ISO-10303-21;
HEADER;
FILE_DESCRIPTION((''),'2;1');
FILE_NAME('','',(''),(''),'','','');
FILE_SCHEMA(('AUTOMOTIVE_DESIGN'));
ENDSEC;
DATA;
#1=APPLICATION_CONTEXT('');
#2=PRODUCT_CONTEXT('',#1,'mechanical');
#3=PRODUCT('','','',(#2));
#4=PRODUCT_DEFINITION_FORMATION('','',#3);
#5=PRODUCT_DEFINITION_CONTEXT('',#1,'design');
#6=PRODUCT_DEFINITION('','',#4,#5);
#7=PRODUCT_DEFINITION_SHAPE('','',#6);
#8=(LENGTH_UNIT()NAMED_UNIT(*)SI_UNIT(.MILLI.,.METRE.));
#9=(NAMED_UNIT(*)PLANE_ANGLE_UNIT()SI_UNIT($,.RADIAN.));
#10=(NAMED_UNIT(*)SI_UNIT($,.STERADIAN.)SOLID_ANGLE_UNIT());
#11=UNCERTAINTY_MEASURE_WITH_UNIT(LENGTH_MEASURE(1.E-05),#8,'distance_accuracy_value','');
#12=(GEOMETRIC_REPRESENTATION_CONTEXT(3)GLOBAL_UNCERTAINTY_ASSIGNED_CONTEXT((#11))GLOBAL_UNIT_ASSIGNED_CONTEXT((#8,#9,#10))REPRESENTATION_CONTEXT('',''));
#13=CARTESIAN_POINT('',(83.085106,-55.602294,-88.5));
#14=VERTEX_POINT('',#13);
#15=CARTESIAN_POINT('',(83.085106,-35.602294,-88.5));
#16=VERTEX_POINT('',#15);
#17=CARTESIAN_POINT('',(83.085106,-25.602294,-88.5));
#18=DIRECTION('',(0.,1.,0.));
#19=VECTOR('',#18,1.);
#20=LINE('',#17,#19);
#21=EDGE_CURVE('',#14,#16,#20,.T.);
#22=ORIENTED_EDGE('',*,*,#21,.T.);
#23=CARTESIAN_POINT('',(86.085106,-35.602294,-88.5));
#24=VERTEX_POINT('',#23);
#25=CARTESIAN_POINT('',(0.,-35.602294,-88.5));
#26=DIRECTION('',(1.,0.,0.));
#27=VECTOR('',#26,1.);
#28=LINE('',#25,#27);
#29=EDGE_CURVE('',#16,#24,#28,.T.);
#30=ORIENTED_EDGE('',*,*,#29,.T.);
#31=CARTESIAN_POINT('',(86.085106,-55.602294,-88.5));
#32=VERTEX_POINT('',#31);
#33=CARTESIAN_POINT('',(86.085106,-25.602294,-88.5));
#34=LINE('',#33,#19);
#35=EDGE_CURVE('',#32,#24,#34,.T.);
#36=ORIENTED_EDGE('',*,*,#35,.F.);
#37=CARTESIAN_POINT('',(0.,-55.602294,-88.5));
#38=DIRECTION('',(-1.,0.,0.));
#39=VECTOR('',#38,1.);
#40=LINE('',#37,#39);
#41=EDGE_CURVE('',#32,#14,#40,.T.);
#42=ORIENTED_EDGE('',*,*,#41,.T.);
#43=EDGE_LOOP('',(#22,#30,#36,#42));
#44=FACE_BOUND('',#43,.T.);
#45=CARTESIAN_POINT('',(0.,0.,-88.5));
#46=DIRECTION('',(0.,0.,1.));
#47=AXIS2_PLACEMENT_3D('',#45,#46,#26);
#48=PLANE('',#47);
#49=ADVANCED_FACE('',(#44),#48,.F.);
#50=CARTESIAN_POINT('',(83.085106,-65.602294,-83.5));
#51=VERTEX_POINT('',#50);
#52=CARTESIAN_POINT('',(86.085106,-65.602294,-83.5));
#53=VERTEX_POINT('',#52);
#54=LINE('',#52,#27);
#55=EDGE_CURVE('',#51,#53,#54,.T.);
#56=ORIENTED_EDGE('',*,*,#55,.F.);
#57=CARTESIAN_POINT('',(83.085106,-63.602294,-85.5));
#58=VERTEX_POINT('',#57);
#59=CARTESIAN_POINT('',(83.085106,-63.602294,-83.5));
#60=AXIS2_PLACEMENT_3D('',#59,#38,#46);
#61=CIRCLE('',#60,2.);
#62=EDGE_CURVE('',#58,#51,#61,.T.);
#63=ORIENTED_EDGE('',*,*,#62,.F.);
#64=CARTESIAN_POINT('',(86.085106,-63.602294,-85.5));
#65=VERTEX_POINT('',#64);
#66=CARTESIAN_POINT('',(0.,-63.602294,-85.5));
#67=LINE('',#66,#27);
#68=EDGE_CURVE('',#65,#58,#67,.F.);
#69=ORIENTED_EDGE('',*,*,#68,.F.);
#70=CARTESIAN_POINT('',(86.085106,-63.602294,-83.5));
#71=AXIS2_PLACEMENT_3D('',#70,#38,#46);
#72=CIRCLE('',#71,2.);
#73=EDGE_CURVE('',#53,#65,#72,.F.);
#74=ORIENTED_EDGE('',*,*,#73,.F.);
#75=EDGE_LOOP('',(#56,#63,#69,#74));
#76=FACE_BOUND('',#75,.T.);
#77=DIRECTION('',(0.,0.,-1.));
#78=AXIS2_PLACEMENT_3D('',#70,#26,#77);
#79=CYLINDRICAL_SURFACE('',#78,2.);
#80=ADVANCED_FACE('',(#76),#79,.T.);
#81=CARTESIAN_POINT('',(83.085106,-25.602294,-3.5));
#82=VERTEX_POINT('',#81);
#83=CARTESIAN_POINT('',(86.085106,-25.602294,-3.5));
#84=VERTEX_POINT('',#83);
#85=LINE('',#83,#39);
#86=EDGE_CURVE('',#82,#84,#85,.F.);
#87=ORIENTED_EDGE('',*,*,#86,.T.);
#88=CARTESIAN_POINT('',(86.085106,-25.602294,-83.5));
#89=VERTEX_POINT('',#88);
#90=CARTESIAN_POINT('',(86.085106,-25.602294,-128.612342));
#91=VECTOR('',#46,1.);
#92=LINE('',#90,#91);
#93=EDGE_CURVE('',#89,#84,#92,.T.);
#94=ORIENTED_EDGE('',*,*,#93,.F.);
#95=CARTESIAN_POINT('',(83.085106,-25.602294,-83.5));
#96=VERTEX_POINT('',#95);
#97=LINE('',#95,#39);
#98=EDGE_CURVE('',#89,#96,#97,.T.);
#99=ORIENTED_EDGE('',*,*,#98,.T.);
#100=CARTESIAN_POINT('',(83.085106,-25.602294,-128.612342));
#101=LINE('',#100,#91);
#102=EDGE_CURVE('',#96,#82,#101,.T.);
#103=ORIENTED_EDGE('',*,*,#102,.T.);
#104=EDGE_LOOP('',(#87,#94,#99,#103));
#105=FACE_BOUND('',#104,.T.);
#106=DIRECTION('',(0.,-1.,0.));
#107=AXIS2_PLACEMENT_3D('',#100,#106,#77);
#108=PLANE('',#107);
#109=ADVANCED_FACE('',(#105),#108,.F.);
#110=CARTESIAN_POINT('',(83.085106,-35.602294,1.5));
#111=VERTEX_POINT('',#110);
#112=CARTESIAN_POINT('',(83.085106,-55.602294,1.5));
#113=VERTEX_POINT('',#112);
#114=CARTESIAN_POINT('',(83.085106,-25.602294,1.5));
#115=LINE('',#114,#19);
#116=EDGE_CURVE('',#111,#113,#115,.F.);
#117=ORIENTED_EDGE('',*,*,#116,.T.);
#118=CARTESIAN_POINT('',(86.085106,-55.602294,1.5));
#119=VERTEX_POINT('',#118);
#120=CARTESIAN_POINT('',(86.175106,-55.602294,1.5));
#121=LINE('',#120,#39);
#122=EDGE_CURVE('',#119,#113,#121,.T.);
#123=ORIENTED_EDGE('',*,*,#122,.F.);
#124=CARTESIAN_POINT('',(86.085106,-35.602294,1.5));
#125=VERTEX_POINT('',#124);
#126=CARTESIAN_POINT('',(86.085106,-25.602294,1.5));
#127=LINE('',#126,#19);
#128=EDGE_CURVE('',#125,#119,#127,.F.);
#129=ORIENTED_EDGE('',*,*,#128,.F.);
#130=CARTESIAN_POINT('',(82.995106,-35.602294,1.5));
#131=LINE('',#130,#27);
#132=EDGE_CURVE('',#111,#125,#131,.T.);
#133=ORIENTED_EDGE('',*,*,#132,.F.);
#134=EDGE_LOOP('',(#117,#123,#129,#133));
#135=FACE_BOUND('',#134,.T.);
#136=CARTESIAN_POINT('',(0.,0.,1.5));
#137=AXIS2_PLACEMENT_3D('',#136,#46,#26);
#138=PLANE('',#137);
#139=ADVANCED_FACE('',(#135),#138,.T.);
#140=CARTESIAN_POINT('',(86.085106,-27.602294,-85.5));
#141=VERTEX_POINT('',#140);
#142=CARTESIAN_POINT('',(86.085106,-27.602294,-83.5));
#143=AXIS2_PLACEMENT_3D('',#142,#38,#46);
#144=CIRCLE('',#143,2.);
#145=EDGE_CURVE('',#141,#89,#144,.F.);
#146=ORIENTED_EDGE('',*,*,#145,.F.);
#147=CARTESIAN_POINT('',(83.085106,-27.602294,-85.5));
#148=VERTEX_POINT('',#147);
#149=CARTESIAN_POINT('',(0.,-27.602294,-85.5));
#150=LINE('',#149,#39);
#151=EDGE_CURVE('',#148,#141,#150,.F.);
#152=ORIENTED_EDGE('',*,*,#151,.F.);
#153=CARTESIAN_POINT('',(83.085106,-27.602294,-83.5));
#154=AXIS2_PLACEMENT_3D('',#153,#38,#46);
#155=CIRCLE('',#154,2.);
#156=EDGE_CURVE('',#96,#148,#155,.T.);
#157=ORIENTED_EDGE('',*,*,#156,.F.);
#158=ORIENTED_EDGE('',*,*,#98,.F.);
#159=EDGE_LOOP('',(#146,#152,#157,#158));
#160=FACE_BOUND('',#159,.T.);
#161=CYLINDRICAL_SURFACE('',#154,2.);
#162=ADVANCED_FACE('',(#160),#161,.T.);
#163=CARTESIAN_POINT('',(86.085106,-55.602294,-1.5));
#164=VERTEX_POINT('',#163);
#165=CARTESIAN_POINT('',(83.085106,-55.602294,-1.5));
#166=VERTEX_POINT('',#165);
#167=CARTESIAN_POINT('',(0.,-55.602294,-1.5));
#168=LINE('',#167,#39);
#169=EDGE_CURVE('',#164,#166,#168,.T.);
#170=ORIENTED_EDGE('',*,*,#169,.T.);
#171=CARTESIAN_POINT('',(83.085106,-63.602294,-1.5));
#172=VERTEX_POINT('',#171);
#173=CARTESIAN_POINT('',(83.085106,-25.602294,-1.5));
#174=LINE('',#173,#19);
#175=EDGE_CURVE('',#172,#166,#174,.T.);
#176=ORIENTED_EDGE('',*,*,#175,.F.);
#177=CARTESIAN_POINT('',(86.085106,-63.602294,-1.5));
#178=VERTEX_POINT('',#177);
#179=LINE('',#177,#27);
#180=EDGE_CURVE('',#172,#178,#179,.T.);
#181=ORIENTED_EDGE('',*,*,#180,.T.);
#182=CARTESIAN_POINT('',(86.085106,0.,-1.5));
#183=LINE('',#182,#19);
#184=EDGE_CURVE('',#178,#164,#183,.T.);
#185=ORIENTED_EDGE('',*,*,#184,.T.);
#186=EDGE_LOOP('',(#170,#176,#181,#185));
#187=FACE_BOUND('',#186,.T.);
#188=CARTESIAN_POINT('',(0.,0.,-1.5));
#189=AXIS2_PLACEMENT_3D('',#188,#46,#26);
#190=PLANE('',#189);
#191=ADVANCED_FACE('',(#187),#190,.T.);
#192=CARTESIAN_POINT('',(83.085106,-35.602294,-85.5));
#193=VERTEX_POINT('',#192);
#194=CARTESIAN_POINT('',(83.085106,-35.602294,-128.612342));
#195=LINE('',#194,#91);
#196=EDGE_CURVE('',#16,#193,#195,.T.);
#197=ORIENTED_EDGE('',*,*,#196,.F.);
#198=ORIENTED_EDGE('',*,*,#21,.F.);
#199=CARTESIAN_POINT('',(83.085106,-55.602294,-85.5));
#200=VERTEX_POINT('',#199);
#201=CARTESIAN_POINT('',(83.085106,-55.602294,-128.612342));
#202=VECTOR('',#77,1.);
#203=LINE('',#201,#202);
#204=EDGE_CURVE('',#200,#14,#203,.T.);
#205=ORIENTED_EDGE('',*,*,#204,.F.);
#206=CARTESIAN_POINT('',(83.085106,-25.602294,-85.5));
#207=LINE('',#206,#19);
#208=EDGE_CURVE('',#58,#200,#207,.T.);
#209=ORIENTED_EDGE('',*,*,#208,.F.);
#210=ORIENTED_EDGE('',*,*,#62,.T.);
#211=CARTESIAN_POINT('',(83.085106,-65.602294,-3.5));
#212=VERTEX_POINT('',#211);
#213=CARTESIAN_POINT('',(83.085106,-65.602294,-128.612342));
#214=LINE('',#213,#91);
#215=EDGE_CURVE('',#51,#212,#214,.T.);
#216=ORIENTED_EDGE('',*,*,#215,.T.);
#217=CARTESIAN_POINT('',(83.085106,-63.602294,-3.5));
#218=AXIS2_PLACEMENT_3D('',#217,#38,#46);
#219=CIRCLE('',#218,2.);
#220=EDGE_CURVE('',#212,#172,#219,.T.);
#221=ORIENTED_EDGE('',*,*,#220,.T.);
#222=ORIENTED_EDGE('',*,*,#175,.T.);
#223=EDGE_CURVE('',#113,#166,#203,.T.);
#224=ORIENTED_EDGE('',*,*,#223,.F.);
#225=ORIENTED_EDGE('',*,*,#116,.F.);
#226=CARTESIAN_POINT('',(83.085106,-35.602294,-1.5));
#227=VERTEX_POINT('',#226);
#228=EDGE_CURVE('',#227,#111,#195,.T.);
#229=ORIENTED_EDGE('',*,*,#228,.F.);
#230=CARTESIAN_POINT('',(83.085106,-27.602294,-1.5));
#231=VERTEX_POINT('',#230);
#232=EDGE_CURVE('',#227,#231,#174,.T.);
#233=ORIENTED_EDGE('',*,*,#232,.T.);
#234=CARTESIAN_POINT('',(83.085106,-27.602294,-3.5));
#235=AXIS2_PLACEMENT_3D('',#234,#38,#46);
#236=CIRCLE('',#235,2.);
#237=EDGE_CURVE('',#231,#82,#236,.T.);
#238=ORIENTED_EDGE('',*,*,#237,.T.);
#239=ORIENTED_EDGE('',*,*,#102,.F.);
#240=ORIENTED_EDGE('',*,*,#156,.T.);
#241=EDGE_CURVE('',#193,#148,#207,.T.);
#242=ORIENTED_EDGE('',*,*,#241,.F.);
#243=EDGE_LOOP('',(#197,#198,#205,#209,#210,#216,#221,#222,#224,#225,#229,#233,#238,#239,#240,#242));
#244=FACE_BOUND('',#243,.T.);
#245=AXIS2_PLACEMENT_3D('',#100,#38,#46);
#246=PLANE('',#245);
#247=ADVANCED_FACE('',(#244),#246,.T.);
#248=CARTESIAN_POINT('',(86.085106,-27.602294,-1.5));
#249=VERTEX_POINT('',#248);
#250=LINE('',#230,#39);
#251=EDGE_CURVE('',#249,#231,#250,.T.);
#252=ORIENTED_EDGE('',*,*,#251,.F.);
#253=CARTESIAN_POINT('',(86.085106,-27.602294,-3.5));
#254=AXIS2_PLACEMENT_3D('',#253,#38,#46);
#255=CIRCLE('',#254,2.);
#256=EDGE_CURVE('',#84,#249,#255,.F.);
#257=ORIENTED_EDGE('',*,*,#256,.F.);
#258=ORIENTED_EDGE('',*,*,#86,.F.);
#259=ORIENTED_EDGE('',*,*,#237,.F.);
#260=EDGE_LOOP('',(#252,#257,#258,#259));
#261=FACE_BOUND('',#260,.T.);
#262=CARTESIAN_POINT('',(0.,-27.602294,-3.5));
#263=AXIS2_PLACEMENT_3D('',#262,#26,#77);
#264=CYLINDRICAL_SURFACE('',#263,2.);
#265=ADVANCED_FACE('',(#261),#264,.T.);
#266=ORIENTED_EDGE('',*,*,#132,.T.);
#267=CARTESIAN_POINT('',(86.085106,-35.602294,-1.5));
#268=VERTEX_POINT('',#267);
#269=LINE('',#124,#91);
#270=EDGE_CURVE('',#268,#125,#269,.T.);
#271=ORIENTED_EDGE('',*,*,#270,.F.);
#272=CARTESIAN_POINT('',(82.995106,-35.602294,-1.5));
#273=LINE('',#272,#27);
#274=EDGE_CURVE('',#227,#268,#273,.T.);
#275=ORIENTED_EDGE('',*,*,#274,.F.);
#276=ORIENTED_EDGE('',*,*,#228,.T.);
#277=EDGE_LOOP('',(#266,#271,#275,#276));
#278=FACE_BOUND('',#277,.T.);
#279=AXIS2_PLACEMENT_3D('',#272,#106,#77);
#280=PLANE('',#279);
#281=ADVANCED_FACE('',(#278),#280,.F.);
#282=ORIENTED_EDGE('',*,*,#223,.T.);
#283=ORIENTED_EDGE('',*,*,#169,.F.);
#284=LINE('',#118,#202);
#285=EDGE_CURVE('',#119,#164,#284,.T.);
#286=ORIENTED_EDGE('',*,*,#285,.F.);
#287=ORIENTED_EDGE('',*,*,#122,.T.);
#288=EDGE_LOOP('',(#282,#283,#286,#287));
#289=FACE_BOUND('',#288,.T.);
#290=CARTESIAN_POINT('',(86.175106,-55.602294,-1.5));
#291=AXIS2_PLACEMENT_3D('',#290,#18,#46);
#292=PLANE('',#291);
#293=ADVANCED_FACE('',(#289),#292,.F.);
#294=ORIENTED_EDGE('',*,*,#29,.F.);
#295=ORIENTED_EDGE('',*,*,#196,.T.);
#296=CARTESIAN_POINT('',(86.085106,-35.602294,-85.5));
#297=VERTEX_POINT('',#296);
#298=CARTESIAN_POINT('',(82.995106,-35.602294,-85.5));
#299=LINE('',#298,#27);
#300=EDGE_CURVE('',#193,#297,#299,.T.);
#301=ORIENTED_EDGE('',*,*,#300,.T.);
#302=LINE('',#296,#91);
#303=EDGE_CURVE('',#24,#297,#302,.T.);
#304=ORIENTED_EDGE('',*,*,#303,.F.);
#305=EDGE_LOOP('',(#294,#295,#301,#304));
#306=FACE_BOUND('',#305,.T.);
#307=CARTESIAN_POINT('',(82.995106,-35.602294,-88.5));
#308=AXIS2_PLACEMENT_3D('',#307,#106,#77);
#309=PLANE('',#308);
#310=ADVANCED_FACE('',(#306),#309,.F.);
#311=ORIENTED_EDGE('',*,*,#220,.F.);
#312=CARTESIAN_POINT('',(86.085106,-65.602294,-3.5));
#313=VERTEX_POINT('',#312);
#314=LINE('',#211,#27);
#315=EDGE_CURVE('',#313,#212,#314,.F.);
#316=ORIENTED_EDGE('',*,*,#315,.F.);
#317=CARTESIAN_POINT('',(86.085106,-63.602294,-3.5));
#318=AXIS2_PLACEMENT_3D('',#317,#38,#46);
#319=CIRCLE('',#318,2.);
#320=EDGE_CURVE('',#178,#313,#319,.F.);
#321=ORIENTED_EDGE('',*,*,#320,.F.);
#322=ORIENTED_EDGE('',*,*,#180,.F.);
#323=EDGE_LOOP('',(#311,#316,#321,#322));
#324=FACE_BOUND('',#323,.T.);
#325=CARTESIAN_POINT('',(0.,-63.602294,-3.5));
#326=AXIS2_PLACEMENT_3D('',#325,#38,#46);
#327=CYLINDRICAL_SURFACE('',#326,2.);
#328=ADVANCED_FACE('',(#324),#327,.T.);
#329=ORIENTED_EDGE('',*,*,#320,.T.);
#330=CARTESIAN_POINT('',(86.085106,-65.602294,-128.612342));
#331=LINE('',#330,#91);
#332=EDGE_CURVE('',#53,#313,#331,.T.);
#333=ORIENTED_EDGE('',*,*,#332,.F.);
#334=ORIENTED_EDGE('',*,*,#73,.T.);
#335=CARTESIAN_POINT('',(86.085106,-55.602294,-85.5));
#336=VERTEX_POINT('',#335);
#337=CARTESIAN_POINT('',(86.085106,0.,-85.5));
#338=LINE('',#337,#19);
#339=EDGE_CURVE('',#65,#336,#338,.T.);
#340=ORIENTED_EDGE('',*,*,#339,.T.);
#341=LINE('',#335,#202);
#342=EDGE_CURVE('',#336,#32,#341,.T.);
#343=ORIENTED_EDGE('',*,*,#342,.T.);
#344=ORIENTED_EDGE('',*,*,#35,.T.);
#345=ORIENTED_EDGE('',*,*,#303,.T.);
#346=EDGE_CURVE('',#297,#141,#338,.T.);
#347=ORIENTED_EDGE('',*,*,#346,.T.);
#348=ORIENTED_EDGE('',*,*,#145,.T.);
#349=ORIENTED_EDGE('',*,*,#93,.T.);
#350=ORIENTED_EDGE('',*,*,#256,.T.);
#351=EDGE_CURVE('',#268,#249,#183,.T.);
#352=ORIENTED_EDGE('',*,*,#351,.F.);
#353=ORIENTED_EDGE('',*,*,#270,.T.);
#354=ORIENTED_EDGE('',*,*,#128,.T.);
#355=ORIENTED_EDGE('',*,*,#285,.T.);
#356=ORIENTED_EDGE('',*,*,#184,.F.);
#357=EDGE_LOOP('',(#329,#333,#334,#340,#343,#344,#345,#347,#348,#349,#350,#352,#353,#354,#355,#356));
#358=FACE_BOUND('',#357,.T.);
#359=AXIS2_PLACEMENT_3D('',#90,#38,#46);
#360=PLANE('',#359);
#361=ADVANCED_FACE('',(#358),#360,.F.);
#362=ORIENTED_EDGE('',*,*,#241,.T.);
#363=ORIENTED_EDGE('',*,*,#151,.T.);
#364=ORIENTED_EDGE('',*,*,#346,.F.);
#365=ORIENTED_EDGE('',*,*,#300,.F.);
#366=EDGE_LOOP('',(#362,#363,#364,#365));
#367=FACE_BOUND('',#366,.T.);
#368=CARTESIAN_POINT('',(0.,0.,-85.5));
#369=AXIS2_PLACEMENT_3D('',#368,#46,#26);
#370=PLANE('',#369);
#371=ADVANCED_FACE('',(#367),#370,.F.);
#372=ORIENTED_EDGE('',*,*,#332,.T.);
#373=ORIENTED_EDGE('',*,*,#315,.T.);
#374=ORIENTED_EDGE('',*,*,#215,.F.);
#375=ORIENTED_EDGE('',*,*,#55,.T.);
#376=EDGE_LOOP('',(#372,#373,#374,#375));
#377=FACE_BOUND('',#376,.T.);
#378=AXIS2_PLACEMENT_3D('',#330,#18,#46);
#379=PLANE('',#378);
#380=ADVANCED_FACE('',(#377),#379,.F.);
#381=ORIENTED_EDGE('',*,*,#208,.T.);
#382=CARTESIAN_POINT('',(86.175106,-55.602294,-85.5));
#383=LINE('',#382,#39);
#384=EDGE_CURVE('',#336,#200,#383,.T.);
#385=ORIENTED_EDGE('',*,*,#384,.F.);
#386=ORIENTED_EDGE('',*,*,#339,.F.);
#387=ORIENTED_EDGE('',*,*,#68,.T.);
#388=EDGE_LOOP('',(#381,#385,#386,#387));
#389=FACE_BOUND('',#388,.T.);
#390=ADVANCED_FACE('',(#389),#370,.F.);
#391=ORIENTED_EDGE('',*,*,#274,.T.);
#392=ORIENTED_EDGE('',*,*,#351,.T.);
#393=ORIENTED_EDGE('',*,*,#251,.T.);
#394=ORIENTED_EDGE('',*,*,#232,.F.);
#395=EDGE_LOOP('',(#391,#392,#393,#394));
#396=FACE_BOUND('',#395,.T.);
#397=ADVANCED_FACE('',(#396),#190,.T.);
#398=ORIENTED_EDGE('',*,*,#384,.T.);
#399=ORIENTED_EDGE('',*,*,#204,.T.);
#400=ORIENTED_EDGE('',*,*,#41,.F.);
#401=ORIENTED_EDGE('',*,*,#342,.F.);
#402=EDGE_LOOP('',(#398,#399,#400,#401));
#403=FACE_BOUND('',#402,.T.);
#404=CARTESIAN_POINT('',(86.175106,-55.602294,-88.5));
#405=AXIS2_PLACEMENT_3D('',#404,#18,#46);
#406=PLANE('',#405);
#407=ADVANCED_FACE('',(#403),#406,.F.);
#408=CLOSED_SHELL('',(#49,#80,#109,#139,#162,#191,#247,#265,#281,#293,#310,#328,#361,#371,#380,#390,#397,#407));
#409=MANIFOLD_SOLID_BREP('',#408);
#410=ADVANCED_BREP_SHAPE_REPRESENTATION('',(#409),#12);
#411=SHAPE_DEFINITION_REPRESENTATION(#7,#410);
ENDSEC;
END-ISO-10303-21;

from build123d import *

# Parameters (mm, degrees)
SKETCH1_W           = 3
SKETCH1_H           = 40
EXTRUDE_THIN1_DEPTH = 90
CAVITY1_START       = -65.602294015
CAVITY1_OUTLINE_W   = 3
CAVITY1_OUTLINE_H   = 3
CAVITY1_DEPTH       = 10
CAVITY1_START_2     = -35.602294015
CAVITY1_2_OUTLINE_W = 3
CAVITY1_2_OUTLINE_H = 3
CAVITY1_2_DEPTH     = 10
FILLET1_R           = 2


# Read off the part's stored shape, not the designer's step: Cavity1
with BuildPart() as part:
    # Sketch1 → Extrude-Thin1 (new body)
    with BuildSketch(Plane.XY.offset(1.5)):
        with Locations((84.585106383, -45.602294015)):
            Rectangle(SKETCH1_W, SKETCH1_H)
    extrude(amount=-EXTRUDE_THIN1_DEPTH)

    # Cavity1 outline → Cavity1 (cut)
    with BuildSketch(Plane(origin=(0, 0, 0), x_dir=(1, 0, 0), z_dir=(0, 1, 0)).offset(CAVITY1_START)):
        with Locations((84.585106383, 87)):
            Rectangle(CAVITY1_OUTLINE_W, CAVITY1_OUTLINE_H)
        with Locations((84.585106383, 0)):
            Rectangle(CAVITY1_OUTLINE_W, CAVITY1_OUTLINE_H)
    extrude(amount=CAVITY1_DEPTH, mode=Mode.SUBTRACT)

    # Cavity1 2 outline → Cavity1 2 (cut)
    with BuildSketch(Plane(origin=(0, 0, 0), x_dir=(1, 0, 0), z_dir=(0, 1, 0)).offset(CAVITY1_START_2)):
        with Locations((84.585106383, 87)):
            Rectangle(CAVITY1_2_OUTLINE_W, CAVITY1_2_OUTLINE_H)
        with Locations((84.585106383, 0)):
            Rectangle(CAVITY1_2_OUTLINE_W, CAVITY1_2_OUTLINE_H)
    extrude(amount=CAVITY1_2_DEPTH, mode=Mode.SUBTRACT)

    # Fillet1
    fillet1_edges = [part.edges().sort_by_distance(p)[0] for p in [
        (84.585106383, -65.602294015, -85.5),
        (84.585106383, -25.602294015, -85.5),
        (84.585106383, -65.602294015, -1.5),
        (84.585106383, -25.602294015, -1.5),
    ]]
    fillet(fillet1_edges, radius=FILLET1_R)


solid = part.part
